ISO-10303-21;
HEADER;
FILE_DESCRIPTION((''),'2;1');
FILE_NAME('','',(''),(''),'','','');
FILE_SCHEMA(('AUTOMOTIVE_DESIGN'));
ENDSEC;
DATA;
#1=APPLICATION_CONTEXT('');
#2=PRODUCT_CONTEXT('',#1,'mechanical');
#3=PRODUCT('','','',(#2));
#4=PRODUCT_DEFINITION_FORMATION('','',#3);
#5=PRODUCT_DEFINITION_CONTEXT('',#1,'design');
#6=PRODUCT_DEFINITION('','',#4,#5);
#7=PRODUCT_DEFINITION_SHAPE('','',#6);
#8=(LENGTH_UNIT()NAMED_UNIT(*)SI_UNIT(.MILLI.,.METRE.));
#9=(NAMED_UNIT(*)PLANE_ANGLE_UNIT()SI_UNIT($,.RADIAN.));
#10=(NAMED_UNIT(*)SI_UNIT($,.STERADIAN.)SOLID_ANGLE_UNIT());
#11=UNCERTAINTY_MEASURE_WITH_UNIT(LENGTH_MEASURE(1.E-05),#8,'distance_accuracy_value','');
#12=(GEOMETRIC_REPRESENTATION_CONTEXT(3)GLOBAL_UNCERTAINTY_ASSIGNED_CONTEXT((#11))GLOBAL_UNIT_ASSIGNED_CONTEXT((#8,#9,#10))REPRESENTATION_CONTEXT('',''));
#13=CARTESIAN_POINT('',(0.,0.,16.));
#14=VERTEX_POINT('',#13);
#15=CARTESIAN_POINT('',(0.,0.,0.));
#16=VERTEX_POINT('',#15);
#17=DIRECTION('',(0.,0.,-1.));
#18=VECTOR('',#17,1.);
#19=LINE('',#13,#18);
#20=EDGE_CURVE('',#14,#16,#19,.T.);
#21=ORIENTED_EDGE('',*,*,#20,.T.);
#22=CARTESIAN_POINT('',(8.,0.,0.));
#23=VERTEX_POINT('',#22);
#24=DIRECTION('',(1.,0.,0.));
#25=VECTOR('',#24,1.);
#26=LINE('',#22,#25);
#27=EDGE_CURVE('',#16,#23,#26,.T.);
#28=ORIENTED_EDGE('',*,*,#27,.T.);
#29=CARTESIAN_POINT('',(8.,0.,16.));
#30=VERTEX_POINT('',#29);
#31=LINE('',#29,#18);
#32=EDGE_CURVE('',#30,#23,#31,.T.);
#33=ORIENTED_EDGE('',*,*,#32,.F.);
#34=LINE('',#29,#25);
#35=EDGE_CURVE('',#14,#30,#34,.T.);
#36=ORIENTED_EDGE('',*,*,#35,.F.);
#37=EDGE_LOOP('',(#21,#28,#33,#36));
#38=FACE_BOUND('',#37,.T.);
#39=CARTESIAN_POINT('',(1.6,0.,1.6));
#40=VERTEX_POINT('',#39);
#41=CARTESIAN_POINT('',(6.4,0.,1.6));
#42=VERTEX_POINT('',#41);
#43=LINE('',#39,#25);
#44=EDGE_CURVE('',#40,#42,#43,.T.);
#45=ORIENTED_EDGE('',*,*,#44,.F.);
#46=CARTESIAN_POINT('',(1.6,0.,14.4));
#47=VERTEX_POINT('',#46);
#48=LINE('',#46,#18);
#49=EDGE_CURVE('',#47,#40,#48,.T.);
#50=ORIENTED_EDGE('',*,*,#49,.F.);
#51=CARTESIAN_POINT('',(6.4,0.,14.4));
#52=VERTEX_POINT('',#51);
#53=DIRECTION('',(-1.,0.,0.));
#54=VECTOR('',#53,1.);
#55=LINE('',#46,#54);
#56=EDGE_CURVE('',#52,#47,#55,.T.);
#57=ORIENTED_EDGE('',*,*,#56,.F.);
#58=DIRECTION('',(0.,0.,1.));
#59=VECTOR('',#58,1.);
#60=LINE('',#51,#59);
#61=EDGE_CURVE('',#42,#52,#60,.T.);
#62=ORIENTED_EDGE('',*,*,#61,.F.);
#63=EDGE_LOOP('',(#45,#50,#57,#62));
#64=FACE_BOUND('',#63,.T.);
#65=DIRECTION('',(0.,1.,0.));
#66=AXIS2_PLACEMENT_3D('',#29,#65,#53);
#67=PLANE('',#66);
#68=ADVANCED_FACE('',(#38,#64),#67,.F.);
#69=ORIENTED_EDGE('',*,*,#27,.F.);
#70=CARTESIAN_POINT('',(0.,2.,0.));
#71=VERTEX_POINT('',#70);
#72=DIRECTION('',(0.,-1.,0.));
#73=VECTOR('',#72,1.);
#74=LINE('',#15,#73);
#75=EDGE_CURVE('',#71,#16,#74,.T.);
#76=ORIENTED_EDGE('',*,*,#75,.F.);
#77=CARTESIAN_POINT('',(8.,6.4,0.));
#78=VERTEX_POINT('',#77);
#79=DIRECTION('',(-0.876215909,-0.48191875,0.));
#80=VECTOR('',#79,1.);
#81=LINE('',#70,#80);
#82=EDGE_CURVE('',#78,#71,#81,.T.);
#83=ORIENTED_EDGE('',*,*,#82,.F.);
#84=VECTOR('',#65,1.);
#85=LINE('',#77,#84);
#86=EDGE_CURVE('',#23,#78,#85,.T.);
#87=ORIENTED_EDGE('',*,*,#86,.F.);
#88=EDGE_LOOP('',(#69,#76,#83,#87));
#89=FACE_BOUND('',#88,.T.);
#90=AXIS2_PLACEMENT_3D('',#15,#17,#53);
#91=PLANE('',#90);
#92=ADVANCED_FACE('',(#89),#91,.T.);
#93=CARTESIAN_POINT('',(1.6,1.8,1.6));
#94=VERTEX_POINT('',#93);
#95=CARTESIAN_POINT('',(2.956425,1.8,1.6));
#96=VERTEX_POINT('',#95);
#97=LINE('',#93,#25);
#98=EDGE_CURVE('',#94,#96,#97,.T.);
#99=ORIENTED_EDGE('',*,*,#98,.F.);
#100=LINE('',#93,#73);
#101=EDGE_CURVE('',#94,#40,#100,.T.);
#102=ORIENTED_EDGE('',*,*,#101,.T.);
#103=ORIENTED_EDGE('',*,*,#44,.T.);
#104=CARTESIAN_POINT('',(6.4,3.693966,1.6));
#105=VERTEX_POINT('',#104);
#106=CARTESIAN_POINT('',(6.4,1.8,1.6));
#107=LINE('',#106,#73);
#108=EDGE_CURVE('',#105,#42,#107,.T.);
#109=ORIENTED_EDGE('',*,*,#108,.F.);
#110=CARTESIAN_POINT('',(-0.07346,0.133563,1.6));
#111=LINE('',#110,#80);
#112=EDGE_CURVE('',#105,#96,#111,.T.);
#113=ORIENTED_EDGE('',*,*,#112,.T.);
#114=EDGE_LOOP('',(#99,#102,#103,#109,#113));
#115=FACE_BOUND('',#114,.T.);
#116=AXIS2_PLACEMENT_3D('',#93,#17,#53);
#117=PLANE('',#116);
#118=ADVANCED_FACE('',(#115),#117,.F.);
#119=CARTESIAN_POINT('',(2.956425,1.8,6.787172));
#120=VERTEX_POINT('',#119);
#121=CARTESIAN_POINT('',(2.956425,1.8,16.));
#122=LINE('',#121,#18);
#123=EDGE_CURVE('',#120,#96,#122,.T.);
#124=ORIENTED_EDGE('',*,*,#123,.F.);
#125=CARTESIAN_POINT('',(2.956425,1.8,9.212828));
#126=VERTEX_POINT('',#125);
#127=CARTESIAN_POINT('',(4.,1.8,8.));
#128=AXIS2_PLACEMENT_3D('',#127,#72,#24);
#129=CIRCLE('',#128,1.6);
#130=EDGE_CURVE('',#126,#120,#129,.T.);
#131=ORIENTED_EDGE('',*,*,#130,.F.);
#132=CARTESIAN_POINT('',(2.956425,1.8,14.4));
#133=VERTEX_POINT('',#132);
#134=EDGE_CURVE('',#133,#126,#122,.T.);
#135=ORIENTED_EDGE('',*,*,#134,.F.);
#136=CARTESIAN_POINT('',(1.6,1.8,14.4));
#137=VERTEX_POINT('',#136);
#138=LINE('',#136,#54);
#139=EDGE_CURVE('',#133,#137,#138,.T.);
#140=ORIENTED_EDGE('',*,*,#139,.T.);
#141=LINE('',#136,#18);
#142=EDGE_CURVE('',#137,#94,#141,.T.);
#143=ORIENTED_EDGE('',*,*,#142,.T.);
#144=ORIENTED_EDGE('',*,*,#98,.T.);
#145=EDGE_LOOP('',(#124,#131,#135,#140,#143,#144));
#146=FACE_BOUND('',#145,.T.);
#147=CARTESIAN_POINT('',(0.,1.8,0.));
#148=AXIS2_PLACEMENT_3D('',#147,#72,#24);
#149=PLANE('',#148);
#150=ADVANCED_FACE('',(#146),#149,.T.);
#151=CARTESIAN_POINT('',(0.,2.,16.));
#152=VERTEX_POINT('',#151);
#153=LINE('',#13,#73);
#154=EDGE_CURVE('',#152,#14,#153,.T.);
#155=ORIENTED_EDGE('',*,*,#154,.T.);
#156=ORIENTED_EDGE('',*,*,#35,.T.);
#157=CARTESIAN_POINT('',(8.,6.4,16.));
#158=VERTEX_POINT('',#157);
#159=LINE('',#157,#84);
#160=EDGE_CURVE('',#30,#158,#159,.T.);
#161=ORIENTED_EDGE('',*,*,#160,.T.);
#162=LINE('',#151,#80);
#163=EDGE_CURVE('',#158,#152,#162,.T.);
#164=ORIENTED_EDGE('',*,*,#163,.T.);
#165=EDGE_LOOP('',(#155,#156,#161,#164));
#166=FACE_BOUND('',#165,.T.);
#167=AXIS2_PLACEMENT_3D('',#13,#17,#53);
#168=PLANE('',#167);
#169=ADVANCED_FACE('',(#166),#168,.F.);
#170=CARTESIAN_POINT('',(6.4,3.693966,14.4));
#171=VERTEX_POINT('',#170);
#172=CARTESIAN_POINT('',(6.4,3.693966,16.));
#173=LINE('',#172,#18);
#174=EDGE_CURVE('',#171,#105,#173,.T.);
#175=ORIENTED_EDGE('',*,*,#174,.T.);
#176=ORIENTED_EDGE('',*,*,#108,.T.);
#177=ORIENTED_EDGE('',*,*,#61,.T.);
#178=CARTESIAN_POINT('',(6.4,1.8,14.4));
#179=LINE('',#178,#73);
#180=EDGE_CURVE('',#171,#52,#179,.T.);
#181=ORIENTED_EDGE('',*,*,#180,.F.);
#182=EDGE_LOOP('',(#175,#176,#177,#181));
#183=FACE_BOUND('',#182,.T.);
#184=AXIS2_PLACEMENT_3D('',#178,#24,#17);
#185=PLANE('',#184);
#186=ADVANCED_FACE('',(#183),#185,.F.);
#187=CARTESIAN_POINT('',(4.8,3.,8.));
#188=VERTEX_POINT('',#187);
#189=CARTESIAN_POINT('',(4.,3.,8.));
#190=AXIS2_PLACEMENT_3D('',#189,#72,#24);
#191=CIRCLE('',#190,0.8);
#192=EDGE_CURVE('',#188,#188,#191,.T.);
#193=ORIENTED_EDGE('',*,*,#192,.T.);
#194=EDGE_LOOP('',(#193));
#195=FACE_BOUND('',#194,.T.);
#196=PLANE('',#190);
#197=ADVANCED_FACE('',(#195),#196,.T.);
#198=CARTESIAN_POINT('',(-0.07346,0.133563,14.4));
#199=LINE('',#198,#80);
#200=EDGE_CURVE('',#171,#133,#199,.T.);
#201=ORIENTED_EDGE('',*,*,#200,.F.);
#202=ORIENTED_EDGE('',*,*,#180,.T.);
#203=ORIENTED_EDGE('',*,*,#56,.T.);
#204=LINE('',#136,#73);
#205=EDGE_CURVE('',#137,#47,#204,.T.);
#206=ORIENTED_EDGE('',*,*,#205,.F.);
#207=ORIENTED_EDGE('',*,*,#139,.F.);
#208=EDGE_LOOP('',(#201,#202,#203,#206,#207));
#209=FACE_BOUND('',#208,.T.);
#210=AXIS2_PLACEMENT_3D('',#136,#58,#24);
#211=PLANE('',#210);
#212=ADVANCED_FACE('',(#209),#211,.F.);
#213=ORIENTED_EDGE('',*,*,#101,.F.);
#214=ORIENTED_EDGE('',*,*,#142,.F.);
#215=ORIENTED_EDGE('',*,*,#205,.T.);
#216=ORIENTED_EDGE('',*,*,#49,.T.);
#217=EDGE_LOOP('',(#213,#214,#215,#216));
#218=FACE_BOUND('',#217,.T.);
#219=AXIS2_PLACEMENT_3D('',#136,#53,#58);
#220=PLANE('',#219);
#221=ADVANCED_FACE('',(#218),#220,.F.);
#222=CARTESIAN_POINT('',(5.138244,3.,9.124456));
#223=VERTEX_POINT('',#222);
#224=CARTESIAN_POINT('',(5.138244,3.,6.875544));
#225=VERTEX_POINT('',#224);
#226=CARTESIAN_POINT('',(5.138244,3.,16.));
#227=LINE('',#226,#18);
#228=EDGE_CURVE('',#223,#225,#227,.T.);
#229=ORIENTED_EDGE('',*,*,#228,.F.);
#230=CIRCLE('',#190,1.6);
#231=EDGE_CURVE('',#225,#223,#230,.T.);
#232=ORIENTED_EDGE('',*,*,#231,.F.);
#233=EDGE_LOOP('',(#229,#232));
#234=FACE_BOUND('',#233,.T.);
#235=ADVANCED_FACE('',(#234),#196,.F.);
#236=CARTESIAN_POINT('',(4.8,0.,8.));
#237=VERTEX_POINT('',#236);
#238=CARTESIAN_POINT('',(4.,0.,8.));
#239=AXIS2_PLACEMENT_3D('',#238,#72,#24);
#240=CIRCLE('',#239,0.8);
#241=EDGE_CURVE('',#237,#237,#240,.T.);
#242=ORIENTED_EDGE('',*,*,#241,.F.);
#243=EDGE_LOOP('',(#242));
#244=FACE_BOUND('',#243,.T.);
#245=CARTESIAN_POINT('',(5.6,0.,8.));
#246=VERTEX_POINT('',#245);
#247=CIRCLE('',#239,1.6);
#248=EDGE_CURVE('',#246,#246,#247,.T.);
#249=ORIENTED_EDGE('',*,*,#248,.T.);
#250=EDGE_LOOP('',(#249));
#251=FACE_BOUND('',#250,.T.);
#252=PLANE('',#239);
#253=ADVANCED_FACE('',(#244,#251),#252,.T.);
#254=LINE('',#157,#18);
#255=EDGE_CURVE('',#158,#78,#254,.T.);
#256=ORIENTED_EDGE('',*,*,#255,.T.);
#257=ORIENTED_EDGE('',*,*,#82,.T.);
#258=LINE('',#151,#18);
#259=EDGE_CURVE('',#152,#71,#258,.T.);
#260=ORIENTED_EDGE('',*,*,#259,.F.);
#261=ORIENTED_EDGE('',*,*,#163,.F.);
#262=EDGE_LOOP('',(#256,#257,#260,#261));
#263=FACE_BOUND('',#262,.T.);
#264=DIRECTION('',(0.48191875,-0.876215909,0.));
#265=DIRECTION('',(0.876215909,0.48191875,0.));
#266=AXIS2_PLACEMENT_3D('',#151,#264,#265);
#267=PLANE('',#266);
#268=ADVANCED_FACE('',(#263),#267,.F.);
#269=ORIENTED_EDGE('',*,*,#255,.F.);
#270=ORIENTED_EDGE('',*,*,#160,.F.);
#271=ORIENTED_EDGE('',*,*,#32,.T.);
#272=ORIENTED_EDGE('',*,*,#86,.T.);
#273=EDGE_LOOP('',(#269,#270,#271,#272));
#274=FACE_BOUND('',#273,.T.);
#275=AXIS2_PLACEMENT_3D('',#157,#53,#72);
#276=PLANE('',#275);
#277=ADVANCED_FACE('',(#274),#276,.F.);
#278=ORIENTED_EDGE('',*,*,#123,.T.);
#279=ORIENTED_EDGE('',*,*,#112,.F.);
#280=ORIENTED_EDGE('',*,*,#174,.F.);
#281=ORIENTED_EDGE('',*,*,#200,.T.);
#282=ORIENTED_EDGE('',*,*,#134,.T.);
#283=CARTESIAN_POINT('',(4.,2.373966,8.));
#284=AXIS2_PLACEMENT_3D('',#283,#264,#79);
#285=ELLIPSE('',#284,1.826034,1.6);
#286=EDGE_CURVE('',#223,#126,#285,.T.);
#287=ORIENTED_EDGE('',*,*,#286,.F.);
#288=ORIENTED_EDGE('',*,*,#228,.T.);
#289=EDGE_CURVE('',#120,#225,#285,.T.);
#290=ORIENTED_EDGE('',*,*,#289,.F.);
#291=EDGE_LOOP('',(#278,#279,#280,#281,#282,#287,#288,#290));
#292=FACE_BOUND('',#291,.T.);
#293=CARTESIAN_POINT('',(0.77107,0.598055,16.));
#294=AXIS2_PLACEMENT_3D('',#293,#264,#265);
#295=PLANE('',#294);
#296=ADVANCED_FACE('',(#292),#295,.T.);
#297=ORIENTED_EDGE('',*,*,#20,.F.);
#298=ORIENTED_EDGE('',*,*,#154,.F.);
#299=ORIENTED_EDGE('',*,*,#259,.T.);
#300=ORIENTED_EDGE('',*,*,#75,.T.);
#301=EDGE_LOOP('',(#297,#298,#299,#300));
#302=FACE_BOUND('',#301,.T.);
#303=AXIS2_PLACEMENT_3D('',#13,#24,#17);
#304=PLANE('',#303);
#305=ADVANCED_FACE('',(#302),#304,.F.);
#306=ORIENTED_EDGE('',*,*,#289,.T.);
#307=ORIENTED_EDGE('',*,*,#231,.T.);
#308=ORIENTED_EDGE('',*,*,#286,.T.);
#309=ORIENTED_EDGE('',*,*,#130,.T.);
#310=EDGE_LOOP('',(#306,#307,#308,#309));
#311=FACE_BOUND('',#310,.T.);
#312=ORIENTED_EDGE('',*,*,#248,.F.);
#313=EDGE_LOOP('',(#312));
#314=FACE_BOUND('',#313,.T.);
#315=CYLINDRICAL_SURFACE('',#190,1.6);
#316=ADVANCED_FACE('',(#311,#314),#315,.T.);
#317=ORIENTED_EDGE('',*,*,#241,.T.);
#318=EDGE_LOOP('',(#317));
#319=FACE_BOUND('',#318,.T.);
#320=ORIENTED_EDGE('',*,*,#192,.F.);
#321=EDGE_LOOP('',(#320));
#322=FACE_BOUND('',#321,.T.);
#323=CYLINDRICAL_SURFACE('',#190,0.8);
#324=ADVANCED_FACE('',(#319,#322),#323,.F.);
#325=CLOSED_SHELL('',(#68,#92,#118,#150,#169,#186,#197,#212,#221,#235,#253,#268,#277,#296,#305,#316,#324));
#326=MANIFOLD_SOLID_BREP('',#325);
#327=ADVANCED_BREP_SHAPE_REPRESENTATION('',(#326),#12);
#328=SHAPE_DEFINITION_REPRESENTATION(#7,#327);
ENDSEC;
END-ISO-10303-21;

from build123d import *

# Parameters (mm, degrees)
BOSS_EXTRUDE1_DEPTH = 16
SKETCH4_W           = 4.8
SKETCH4_H           = 12.8
CUT_EXTRUDE2_DEPTH  = 1.8
SHELL1_START        = 1.6
SHELL1_DEPTH        = 12.8
SKETCH2_R           = 1.6
BOSS_EXTRUDE2_DEPTH = 3
SKETCH3_R           = 0.8
CUT_EXTRUDE1_DEPTH  = 3


# Read off the part's stored shape, not the designer's step: Shell1
with BuildPart() as part:
    # Sketch1 → Boss-Extrude1 (new body)
    with BuildSketch(Plane.XY):
        Polygon((0, 0), (0, 2), (8, 6.4), (8, 0), align=None)
    extrude(amount=BOSS_EXTRUDE1_DEPTH)

    # Sketch4 → Cut-Extrude2 (cut)
    with BuildSketch(Plane.XZ):
        with Locations((4, 8)):
            Rectangle(SKETCH4_W, SKETCH4_H)
    extrude(amount=-CUT_EXTRUDE2_DEPTH, mode=Mode.SUBTRACT)

    # Shell1 outline → Shell1 (cut)
    with BuildSketch(Plane.XY.offset(SHELL1_START)):
        Polygon((2.95642537, 1.8), (6.4, 1.8), (6.4, 3.693966046), align=None)
    extrude(amount=SHELL1_DEPTH, mode=Mode.SUBTRACT)

    # Sketch2 → Boss-Extrude2 (add)
    with BuildSketch(Plane.XZ):
        with Locations((4, 8)):
            Circle(SKETCH2_R)
    extrude(amount=-BOSS_EXTRUDE2_DEPTH)

    # Sketch3 → Cut-Extrude1 (cut)
    with BuildSketch(Plane.XZ):
        with Locations((4, 8)):
            Circle(SKETCH3_R)
    extrude(amount=-CUT_EXTRUDE1_DEPTH, mode=Mode.SUBTRACT)


solid = part.part
